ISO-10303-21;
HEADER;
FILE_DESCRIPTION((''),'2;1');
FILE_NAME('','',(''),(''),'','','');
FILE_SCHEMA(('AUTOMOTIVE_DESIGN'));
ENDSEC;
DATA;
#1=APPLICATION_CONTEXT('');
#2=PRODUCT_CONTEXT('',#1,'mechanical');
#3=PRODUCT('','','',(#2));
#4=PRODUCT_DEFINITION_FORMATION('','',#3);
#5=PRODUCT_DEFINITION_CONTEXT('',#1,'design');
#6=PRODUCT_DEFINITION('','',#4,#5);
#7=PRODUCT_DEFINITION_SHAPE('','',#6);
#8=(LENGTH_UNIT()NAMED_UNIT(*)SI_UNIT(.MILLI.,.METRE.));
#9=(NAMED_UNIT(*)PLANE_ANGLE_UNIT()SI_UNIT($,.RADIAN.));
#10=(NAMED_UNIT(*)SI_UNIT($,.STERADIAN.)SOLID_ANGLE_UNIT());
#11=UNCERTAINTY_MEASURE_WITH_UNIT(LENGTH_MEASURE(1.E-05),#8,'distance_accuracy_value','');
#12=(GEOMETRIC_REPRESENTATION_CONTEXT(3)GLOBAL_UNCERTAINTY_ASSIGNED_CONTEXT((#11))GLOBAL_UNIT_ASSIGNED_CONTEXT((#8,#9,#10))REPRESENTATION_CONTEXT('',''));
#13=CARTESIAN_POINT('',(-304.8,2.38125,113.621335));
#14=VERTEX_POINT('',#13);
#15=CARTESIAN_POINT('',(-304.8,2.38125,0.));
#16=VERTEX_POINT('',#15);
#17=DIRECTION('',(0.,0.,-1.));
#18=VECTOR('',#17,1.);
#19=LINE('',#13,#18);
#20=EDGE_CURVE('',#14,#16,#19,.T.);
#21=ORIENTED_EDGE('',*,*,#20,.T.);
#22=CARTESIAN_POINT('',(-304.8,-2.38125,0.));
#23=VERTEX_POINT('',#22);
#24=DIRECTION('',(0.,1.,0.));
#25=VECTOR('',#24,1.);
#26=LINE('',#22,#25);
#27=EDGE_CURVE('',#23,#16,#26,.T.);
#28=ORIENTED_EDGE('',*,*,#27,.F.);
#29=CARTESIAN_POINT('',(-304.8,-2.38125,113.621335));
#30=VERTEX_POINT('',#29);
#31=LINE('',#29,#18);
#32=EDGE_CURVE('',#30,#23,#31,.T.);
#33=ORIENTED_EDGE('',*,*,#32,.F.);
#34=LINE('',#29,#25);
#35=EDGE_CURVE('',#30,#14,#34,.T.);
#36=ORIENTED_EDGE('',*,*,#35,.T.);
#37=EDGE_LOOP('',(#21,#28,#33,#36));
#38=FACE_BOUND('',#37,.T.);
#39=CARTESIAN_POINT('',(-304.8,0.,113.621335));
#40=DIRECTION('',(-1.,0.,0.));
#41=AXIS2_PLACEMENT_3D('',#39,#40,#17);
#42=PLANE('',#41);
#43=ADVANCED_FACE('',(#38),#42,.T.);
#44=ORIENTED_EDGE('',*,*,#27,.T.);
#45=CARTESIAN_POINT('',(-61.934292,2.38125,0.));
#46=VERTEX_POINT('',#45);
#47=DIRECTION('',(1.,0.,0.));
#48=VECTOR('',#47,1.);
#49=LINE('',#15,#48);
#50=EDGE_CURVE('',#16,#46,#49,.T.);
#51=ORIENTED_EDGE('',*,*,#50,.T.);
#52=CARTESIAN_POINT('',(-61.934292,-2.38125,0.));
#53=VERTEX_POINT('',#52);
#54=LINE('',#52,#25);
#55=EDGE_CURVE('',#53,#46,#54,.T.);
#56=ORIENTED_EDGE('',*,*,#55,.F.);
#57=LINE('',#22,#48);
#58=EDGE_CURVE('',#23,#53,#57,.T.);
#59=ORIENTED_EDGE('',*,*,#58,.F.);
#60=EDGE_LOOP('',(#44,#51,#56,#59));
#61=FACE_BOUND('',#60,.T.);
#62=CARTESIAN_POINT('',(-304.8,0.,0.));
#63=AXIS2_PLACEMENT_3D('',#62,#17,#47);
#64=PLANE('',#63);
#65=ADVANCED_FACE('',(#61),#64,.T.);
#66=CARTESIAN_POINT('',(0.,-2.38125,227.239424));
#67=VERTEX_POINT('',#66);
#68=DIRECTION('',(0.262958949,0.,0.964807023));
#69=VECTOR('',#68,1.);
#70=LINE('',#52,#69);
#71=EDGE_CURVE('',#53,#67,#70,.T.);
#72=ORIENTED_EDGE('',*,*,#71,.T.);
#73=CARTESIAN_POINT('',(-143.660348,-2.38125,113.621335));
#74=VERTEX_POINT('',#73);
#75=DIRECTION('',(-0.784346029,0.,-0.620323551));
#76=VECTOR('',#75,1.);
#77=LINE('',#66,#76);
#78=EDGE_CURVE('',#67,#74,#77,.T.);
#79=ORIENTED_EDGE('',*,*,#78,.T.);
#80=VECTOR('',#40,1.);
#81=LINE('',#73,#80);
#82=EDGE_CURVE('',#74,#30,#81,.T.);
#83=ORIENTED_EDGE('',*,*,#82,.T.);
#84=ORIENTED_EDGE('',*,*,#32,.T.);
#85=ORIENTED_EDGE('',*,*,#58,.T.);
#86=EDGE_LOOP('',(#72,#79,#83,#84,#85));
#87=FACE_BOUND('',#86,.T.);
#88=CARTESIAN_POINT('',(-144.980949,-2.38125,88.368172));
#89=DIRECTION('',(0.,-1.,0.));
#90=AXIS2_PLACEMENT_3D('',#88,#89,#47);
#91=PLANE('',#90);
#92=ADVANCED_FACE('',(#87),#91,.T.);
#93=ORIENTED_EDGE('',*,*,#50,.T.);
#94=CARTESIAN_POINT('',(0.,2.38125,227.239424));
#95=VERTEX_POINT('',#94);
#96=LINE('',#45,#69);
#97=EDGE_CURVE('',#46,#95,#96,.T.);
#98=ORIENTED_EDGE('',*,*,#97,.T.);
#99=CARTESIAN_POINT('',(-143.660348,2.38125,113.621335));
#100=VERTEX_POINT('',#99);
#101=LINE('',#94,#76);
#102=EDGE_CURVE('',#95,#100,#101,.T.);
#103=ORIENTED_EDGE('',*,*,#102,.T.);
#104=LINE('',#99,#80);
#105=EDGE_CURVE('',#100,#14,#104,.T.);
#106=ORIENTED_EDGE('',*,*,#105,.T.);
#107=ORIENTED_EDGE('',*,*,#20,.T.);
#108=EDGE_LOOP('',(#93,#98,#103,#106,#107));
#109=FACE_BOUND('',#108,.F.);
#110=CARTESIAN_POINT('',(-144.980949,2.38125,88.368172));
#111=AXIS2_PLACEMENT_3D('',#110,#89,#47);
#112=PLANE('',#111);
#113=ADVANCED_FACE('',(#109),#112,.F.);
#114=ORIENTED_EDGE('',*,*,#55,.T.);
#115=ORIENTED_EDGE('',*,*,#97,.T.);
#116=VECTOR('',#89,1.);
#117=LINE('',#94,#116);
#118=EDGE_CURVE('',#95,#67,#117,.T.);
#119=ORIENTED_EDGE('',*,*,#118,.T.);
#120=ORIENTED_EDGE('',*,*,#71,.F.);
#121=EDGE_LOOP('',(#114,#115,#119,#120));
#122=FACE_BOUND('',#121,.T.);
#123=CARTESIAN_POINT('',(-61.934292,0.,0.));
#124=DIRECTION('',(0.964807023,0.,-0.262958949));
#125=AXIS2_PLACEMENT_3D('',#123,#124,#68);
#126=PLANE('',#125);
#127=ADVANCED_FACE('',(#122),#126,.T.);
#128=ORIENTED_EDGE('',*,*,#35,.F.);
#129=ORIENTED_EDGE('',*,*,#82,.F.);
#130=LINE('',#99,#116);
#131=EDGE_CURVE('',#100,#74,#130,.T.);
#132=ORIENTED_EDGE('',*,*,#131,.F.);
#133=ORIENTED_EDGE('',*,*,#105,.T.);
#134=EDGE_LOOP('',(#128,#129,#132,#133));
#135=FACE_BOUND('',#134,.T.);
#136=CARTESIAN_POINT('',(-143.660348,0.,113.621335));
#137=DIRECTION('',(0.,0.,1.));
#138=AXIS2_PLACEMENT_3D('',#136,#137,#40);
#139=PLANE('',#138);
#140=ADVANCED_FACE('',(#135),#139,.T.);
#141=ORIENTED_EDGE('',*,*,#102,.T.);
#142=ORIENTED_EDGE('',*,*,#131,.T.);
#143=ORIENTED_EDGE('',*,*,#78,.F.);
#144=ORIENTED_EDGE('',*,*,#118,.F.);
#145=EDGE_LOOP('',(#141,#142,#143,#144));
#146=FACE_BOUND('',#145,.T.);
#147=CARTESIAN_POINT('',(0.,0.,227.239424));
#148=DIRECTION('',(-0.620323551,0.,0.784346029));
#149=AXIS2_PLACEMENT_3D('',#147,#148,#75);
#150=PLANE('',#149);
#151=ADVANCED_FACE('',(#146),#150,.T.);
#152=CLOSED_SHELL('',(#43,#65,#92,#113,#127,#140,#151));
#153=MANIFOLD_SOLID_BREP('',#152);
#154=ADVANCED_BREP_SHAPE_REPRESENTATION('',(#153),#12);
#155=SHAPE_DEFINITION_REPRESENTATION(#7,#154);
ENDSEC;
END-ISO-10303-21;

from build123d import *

# Parameters (mm, degrees)
F1_DEPTH = 2.38125


# Not quite as in the source:
# - a feature names something its author has since deleted; it is built from what else it names


with BuildPart() as f1:
    # F0 (on Front) → F1 (new body, symmetric)
    with BuildSketch(Plane.XZ):
        Polygon((-61.9342923164, 0), (0, 227.2394244377), (-143.6603479939, 113.6213351093), (-304.8, 113.6213351093), (-304.8, 0), align=None)
    extrude(amount=F1_DEPTH, both=True)


solid = f1.part
